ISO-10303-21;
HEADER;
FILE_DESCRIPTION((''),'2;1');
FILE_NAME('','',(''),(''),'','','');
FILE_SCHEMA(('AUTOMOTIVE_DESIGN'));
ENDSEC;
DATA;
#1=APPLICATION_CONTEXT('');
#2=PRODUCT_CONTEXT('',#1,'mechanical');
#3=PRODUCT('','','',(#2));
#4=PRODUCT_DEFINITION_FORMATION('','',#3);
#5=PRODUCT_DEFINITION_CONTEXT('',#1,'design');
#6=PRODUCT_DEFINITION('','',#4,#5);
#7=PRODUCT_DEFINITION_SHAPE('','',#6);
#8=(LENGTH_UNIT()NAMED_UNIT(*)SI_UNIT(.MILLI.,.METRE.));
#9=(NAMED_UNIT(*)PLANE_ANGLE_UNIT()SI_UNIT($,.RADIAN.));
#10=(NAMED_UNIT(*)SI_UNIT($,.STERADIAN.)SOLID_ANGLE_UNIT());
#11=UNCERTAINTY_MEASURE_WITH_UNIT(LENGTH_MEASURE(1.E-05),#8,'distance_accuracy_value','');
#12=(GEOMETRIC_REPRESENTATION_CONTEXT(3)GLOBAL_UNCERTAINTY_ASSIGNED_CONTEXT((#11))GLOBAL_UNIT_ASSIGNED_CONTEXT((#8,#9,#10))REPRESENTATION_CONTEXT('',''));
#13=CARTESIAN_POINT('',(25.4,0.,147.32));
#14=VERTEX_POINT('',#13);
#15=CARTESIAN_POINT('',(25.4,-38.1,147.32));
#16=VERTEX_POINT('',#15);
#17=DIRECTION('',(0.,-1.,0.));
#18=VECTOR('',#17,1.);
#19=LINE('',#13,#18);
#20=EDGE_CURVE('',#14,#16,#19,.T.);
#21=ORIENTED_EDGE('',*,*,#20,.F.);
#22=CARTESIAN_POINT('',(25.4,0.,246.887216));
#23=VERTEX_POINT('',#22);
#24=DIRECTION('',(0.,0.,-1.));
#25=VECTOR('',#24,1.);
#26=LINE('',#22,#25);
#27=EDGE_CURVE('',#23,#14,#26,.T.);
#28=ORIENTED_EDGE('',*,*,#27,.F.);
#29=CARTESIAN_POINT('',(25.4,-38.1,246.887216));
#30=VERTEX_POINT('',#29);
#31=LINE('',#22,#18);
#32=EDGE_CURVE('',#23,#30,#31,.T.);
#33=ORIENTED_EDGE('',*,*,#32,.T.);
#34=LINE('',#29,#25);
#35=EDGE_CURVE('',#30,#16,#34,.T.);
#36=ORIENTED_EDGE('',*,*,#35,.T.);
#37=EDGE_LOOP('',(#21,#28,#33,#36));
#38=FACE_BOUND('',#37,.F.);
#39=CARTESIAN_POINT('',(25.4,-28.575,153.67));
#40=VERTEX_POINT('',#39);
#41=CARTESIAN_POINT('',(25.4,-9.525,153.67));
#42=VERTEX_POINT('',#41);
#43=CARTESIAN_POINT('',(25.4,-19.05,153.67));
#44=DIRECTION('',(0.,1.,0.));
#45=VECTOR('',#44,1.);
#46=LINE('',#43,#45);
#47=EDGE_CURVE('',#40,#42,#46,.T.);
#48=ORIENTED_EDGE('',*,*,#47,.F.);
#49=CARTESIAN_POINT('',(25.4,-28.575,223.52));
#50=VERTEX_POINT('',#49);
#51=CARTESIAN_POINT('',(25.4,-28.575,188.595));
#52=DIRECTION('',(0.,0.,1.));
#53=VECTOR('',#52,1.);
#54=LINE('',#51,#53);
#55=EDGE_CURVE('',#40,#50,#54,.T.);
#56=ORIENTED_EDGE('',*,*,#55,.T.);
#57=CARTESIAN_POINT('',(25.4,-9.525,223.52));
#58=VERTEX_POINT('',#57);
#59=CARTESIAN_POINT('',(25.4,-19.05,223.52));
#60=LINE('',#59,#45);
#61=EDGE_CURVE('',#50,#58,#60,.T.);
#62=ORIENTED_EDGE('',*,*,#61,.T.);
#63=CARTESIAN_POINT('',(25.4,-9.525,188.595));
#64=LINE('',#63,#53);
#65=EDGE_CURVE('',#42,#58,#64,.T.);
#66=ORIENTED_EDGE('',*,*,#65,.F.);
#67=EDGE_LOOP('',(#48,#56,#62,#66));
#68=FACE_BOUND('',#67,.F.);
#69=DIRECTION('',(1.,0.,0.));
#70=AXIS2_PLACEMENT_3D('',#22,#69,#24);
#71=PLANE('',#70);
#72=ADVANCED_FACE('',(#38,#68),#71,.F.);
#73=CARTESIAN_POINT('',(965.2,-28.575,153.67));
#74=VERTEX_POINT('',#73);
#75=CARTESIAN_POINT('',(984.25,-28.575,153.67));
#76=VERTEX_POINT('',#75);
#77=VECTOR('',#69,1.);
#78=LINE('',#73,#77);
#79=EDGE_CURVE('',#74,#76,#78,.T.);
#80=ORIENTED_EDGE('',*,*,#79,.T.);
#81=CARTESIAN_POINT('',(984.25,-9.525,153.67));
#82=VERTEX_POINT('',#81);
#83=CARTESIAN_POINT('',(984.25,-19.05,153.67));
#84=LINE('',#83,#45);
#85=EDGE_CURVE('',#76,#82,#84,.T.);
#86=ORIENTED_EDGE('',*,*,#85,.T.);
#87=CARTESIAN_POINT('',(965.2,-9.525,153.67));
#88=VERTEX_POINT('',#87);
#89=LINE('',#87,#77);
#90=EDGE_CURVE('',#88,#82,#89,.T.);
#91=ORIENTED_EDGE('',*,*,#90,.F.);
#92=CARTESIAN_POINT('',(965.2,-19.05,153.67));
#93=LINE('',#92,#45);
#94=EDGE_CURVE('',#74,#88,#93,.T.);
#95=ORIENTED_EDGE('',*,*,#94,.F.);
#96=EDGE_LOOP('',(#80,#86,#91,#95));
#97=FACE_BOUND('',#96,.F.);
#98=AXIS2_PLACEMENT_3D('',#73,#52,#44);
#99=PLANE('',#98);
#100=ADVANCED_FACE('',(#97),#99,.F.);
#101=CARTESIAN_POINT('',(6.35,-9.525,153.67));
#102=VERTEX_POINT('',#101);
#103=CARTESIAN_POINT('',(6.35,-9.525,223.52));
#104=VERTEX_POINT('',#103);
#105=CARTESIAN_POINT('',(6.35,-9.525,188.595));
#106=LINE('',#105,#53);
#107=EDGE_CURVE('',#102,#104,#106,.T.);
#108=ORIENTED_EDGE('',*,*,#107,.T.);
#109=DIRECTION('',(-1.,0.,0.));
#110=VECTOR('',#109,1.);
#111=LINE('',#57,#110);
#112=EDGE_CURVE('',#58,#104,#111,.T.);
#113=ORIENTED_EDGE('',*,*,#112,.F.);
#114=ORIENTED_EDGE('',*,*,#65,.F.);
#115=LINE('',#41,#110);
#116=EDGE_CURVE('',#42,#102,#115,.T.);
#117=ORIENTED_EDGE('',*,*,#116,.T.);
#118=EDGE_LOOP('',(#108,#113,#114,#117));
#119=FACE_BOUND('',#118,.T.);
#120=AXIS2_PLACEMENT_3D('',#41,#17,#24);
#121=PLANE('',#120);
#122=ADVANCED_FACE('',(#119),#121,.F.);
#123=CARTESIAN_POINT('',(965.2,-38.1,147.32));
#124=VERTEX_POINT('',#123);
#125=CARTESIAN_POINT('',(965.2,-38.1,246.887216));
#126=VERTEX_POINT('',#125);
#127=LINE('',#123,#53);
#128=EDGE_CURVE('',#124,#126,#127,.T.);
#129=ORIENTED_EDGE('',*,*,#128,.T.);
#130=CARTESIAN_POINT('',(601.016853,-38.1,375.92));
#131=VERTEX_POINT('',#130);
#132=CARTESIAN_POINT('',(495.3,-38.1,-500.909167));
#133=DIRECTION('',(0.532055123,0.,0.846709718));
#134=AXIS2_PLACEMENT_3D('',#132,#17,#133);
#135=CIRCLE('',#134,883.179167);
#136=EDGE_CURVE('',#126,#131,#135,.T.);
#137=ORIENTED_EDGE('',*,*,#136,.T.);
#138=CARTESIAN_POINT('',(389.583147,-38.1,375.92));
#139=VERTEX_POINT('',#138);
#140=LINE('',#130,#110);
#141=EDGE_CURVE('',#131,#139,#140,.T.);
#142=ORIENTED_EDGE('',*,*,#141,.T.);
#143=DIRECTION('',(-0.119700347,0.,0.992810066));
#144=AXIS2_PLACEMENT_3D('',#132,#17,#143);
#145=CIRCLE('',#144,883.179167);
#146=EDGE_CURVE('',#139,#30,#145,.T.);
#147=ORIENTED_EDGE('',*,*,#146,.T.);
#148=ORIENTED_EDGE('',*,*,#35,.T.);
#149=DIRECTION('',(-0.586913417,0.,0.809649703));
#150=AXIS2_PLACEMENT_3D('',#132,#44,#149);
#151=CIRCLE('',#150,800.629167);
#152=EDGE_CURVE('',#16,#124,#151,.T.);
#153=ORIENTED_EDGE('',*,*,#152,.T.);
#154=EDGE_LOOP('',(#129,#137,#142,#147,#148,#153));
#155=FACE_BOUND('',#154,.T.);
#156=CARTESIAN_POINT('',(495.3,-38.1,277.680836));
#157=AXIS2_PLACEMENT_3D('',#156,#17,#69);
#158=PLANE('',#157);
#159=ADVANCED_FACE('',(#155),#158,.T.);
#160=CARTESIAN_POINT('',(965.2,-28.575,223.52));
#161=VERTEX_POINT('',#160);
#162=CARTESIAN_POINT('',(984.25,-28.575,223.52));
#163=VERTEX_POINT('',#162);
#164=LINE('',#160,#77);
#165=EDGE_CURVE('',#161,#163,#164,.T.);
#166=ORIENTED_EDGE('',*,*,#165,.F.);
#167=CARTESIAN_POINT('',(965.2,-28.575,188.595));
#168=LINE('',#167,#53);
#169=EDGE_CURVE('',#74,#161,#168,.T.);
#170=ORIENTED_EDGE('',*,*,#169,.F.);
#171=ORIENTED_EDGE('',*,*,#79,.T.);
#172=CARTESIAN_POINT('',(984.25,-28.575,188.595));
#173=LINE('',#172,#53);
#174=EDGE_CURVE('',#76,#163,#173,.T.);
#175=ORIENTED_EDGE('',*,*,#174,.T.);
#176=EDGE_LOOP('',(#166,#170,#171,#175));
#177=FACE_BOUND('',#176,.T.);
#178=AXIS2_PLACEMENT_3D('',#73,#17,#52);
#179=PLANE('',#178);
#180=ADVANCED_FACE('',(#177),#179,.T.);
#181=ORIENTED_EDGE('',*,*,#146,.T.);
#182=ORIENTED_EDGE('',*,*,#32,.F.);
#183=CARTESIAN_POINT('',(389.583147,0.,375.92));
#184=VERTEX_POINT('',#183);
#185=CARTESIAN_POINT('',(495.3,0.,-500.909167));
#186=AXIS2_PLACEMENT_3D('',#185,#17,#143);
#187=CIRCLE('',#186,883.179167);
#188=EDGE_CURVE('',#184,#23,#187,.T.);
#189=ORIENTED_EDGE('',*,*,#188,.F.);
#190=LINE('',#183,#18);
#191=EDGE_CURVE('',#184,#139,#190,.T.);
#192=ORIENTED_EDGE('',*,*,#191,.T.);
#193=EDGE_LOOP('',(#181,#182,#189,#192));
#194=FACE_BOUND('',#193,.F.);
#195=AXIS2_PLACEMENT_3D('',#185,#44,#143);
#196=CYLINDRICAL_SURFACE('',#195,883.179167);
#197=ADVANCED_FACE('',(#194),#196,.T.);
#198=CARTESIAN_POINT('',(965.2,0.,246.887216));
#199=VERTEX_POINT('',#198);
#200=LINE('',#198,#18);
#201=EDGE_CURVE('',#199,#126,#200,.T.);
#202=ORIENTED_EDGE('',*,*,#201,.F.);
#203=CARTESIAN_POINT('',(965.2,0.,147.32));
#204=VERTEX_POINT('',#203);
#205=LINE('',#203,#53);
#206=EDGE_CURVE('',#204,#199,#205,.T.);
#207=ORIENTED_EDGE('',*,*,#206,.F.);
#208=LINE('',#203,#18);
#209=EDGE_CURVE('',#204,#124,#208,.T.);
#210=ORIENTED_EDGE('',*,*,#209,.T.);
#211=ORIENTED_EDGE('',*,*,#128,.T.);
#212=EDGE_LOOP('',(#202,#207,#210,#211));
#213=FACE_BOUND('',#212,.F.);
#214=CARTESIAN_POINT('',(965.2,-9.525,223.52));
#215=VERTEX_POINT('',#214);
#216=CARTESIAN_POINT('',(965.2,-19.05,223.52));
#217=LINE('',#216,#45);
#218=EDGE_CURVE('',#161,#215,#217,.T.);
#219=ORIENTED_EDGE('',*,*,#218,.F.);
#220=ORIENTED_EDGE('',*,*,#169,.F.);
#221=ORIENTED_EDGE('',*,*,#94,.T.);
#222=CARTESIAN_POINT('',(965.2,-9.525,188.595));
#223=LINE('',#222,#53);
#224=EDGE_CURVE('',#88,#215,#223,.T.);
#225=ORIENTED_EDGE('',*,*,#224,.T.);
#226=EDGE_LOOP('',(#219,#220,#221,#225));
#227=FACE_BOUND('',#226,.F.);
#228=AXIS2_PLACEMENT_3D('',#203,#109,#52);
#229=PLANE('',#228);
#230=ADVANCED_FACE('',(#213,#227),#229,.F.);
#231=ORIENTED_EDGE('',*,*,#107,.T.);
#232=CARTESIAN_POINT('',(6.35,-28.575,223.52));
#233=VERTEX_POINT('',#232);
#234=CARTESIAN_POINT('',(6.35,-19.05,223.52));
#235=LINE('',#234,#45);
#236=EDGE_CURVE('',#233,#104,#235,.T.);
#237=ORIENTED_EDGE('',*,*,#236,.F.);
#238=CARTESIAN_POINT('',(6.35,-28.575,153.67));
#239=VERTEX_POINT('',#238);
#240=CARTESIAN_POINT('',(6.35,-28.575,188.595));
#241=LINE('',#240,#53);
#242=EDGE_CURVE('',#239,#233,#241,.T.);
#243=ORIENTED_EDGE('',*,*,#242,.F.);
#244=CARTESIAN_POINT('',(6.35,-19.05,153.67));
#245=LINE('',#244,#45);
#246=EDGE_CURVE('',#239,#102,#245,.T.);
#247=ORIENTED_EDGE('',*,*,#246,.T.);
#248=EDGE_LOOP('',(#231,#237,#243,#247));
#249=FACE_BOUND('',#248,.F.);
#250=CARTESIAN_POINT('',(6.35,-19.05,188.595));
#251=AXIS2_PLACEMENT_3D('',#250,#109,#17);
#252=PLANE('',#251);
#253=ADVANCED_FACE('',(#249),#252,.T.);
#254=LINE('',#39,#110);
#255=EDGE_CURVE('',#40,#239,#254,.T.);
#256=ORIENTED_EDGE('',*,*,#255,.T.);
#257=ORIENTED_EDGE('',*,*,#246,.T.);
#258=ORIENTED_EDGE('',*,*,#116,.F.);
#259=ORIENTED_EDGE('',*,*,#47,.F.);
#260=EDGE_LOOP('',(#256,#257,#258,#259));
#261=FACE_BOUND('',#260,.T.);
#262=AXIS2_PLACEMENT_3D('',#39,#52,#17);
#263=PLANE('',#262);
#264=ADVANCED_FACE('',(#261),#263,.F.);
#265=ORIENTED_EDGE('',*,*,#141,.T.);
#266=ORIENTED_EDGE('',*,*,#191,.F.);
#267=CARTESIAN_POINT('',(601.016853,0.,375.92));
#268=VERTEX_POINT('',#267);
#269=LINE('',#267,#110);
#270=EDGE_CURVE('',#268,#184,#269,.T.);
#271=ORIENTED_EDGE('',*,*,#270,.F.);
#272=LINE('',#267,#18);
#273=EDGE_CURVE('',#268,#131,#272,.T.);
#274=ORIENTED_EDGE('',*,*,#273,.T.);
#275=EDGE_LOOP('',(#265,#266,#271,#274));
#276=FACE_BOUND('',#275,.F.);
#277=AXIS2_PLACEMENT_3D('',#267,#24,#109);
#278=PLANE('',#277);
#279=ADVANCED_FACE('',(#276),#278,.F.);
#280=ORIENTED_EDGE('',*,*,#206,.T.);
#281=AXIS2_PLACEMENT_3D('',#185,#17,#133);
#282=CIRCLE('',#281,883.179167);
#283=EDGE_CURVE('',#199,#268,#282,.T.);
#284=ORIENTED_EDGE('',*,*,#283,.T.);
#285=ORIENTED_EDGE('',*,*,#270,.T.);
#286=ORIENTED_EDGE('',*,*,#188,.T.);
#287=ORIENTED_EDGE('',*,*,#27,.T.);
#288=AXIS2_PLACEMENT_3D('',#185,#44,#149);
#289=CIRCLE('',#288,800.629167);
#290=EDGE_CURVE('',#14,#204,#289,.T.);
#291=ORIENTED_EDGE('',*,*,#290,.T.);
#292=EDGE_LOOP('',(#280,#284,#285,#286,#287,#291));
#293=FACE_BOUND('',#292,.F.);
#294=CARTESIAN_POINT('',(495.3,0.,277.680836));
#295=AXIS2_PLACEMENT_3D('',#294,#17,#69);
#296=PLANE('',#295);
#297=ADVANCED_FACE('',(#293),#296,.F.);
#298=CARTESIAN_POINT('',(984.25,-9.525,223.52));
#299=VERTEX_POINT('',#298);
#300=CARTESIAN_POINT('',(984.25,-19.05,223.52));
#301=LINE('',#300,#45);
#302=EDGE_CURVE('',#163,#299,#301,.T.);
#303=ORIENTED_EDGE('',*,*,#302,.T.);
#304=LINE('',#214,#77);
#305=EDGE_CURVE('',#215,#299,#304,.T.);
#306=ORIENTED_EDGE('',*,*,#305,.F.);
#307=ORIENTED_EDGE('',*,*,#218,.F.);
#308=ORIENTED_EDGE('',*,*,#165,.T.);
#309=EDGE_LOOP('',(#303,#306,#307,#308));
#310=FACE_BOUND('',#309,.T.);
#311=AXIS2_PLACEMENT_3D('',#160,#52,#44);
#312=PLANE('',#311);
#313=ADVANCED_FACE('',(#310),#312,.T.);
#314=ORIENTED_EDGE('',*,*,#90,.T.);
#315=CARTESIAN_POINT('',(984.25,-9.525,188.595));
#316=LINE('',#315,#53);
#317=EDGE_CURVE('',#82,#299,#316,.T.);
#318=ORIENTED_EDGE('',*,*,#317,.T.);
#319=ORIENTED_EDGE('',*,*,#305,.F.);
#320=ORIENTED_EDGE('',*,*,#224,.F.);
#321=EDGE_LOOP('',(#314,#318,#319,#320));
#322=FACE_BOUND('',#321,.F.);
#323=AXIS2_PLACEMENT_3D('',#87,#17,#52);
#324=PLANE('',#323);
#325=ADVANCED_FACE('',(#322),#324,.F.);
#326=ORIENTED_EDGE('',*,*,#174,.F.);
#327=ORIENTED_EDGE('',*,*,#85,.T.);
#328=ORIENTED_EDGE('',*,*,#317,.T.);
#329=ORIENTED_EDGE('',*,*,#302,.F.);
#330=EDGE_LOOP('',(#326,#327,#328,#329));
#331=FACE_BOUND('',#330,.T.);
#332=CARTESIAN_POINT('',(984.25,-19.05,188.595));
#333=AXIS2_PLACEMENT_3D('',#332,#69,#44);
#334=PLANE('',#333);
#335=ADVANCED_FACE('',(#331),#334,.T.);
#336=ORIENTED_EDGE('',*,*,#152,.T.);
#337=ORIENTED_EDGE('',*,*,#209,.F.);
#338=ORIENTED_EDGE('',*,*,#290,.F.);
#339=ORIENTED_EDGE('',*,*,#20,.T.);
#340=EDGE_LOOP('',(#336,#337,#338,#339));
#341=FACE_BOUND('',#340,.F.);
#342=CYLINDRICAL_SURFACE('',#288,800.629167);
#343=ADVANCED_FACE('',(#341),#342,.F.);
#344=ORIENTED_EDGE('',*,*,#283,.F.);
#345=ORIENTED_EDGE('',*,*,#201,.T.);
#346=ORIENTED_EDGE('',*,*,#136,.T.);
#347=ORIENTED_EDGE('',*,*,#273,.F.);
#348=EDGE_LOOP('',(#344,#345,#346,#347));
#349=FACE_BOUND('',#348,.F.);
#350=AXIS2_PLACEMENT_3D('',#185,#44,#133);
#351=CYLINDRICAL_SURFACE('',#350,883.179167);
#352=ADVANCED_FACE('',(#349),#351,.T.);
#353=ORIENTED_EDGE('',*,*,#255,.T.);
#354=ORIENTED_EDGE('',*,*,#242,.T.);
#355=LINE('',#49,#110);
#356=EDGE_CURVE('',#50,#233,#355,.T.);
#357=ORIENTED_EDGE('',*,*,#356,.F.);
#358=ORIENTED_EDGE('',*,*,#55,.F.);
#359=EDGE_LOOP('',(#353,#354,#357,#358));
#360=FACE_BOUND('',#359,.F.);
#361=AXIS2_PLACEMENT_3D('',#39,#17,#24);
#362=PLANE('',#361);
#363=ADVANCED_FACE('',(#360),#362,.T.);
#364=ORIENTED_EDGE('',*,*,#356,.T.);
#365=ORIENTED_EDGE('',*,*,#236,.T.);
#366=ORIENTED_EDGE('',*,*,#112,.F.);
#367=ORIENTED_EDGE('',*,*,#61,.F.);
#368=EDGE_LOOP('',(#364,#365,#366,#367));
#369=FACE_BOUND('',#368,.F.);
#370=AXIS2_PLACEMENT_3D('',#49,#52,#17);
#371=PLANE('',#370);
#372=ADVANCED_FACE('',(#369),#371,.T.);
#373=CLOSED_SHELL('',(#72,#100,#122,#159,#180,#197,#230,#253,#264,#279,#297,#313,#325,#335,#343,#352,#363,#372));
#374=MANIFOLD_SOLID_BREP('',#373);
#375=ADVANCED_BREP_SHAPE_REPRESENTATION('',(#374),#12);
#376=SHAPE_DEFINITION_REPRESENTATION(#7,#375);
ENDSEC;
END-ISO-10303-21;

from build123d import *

# Parameters (mm, degrees)
F1_DEPTH = 38.1
F2_W     = 19.05
F2_H     = 69.85
F3_DEPTH = 19.05


# Not quite as in the source:
# - a pattern or mirror of a feature is missing from the dataset's text; its kind, count and spacing are read off the source's solid


with BuildPart() as f1:
    # F0 (on Front) → F1 (new body)
    with BuildSketch(Plane.XZ):
        with BuildLine():
            ThreePointArc((25.4, 147.32), (495.3, 299.72), (965.2, 147.32))
            Line((965.2, 147.32), (965.2, 246.8872163374))
            ThreePointArc((965.2, 246.8872163374), (790.2509366907, 331.5626859382), (601.016852567, 375.92))
            Line((601.016852567, 375.92), (389.583147433, 375.92))
            ThreePointArc((389.583147433, 375.92), (200.3490633093, 331.5626859382), (25.4, 246.8872163374))
            Line((25.4, 246.8872163374), (25.4, 217.17))
            Line((25.4, 217.17), (25.4, 153.67))
            Line((25.4, 153.67), (25.4, 147.32))
        make_face()
    extrude(amount=F1_DEPTH)

    # F2 (on face) → F3 (join)
    with BuildSketch(Plane.YZ.offset(965.2)):
        with Locations((-19.05, 188.595)):
            Rectangle(F2_W, F2_H)
    f3 = extrude(amount=F3_DEPTH)

    # F3_copies: F3 across plane
    add(f3.mirror(Plane(origin=(495.3, 0, 0), x_dir=(0, 0, -1), z_dir=(-1, 0, 0))))


solid = f1.part
